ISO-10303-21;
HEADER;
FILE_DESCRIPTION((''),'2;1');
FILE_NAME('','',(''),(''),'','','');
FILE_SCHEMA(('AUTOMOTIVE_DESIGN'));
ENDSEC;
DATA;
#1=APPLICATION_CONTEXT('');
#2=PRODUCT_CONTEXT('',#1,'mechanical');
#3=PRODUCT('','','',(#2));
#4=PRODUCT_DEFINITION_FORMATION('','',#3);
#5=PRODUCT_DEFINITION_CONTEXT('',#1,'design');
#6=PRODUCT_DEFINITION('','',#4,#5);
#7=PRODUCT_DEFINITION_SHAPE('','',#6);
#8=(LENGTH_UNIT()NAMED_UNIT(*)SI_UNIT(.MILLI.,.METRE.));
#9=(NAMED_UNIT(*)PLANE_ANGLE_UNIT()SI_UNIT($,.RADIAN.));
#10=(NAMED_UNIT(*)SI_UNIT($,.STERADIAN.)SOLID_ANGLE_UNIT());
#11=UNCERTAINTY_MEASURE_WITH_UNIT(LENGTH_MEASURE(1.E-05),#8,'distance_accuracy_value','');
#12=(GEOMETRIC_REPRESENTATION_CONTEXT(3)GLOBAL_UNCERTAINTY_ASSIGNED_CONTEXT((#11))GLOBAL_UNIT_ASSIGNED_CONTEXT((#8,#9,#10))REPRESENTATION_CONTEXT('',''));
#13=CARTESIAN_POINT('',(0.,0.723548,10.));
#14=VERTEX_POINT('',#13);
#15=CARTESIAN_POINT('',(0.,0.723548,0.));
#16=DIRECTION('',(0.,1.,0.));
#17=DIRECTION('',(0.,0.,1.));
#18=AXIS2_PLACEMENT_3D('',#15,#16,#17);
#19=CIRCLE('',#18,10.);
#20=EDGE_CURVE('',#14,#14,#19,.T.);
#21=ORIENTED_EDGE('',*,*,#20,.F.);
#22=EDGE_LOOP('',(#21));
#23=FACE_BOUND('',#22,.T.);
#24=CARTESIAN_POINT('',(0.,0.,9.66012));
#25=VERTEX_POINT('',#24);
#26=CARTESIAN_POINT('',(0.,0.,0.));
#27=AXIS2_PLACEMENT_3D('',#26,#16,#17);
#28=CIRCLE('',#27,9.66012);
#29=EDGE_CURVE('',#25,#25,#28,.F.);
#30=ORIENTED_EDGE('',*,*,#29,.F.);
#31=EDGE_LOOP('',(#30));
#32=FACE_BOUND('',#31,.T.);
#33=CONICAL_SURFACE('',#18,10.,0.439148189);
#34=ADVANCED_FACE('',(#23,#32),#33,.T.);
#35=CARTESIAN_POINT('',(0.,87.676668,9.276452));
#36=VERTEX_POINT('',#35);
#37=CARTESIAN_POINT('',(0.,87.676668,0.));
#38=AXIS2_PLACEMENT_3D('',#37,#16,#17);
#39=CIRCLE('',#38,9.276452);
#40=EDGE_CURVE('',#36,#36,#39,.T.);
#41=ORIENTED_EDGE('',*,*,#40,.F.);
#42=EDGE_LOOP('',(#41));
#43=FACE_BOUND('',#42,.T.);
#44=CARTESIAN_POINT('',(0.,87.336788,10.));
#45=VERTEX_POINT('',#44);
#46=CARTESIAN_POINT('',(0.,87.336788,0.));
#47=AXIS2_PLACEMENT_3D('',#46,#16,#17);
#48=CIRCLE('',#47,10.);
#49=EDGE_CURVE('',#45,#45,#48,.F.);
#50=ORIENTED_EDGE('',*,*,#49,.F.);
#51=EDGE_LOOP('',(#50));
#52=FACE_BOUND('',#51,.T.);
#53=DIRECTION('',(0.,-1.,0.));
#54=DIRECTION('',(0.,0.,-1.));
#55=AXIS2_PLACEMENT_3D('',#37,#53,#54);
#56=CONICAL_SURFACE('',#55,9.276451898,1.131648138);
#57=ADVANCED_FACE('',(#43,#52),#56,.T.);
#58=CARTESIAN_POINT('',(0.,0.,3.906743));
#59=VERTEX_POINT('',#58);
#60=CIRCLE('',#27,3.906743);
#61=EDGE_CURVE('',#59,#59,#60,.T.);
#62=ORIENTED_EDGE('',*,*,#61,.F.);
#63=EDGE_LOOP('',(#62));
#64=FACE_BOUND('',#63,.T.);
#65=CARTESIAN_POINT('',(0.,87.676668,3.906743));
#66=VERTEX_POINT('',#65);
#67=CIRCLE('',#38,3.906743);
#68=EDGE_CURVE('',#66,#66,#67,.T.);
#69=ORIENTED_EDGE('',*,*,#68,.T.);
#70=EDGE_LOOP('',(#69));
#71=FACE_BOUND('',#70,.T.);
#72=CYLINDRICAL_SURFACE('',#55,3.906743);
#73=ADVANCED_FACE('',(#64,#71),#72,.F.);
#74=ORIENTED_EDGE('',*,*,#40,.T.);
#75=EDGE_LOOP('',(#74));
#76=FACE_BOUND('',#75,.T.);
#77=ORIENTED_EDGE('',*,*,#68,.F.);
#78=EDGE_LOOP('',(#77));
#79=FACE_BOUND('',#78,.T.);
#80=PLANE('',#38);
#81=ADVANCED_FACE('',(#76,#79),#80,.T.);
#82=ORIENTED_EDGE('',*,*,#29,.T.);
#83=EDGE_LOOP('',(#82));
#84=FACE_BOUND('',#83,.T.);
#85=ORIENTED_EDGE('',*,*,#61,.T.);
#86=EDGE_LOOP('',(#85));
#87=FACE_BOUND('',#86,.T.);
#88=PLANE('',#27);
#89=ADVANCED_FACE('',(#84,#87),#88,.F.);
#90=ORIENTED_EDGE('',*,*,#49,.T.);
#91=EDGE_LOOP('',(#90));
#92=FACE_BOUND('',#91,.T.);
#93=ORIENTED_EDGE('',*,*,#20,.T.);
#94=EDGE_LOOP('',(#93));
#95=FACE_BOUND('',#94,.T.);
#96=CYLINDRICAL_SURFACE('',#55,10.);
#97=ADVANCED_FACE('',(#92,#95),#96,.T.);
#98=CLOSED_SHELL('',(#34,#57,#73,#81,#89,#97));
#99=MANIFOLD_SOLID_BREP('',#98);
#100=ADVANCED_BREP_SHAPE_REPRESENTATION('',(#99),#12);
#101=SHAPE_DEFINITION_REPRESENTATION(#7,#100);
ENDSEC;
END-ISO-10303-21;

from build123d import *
from OCP.BRepFilletAPI import BRepFilletAPI_MakeChamfer

# Parameters (mm, degrees)
SKETCH1_R           = 10
BOSS_EXTRUDE1_DEPTH = 87.676668009
SKETCH2_R           = 3.906742916
CUT_EXTRUDE1_DEPTH  = 89.809898734
CHAMFER1_SIZE       = 0.339879733
CHAMFER1_SIZE2      = 0.723548102


with BuildPart() as part:
    # Sketch1 → Boss-Extrude1 (new body)
    with BuildSketch(Plane(origin=(0, 0, 0), x_dir=(1, 0, 0), z_dir=(0, 1, 0))):
        Circle(SKETCH1_R)
    extrude(amount=BOSS_EXTRUDE1_DEPTH)

    # Sketch2 → Cut-Extrude1 (cut, through all)
    with BuildSketch(Plane(origin=(0, 0, 0), x_dir=(1, 0, 0), z_dir=(0, 1, 0))):
        Circle(SKETCH2_R)
    extrude(amount=CUT_EXTRUDE1_DEPTH, mode=Mode.SUBTRACT)

    # Chamfer1: one chamfer whose edges measure the first distance from different faces: ONE call of the kernel's chamfer builder (chamfer() names one face for all edges)
    chamfer1_edges_1 = [part.edges().sort_by_distance(p)[0] for p in [
        (-10, 87.676668009, 0),
    ]]
    chamfer1_side_1 = [part.faces().sort_by_distance(p)[0] for p in [
        (-10, 43.838334004, 0),
    ]]
    chamfer1_edges_2 = [part.edges().sort_by_distance(p)[0] for p in [
        (-10, 0, 0),
    ]]
    chamfer1_side_2 = [part.faces().sort_by_distance(p)[0] for p in [
        (-9.717157288, 0, 0),
    ]]
    chamfer1 = BRepFilletAPI_MakeChamfer(part.part.solid().wrapped)
    for e in chamfer1_edges_1:
        chamfer1.Add(CHAMFER1_SIZE, CHAMFER1_SIZE2, e.wrapped, chamfer1_side_1[0].wrapped)  # the first distance lies on this face
    for e in chamfer1_edges_2:
        chamfer1.Add(CHAMFER1_SIZE, CHAMFER1_SIZE2, e.wrapped, chamfer1_side_2[0].wrapped)  # the first distance lies on this face
    add(Compound.cast(chamfer1.Shape()), mode=Mode.REPLACE)


solid = part.part
